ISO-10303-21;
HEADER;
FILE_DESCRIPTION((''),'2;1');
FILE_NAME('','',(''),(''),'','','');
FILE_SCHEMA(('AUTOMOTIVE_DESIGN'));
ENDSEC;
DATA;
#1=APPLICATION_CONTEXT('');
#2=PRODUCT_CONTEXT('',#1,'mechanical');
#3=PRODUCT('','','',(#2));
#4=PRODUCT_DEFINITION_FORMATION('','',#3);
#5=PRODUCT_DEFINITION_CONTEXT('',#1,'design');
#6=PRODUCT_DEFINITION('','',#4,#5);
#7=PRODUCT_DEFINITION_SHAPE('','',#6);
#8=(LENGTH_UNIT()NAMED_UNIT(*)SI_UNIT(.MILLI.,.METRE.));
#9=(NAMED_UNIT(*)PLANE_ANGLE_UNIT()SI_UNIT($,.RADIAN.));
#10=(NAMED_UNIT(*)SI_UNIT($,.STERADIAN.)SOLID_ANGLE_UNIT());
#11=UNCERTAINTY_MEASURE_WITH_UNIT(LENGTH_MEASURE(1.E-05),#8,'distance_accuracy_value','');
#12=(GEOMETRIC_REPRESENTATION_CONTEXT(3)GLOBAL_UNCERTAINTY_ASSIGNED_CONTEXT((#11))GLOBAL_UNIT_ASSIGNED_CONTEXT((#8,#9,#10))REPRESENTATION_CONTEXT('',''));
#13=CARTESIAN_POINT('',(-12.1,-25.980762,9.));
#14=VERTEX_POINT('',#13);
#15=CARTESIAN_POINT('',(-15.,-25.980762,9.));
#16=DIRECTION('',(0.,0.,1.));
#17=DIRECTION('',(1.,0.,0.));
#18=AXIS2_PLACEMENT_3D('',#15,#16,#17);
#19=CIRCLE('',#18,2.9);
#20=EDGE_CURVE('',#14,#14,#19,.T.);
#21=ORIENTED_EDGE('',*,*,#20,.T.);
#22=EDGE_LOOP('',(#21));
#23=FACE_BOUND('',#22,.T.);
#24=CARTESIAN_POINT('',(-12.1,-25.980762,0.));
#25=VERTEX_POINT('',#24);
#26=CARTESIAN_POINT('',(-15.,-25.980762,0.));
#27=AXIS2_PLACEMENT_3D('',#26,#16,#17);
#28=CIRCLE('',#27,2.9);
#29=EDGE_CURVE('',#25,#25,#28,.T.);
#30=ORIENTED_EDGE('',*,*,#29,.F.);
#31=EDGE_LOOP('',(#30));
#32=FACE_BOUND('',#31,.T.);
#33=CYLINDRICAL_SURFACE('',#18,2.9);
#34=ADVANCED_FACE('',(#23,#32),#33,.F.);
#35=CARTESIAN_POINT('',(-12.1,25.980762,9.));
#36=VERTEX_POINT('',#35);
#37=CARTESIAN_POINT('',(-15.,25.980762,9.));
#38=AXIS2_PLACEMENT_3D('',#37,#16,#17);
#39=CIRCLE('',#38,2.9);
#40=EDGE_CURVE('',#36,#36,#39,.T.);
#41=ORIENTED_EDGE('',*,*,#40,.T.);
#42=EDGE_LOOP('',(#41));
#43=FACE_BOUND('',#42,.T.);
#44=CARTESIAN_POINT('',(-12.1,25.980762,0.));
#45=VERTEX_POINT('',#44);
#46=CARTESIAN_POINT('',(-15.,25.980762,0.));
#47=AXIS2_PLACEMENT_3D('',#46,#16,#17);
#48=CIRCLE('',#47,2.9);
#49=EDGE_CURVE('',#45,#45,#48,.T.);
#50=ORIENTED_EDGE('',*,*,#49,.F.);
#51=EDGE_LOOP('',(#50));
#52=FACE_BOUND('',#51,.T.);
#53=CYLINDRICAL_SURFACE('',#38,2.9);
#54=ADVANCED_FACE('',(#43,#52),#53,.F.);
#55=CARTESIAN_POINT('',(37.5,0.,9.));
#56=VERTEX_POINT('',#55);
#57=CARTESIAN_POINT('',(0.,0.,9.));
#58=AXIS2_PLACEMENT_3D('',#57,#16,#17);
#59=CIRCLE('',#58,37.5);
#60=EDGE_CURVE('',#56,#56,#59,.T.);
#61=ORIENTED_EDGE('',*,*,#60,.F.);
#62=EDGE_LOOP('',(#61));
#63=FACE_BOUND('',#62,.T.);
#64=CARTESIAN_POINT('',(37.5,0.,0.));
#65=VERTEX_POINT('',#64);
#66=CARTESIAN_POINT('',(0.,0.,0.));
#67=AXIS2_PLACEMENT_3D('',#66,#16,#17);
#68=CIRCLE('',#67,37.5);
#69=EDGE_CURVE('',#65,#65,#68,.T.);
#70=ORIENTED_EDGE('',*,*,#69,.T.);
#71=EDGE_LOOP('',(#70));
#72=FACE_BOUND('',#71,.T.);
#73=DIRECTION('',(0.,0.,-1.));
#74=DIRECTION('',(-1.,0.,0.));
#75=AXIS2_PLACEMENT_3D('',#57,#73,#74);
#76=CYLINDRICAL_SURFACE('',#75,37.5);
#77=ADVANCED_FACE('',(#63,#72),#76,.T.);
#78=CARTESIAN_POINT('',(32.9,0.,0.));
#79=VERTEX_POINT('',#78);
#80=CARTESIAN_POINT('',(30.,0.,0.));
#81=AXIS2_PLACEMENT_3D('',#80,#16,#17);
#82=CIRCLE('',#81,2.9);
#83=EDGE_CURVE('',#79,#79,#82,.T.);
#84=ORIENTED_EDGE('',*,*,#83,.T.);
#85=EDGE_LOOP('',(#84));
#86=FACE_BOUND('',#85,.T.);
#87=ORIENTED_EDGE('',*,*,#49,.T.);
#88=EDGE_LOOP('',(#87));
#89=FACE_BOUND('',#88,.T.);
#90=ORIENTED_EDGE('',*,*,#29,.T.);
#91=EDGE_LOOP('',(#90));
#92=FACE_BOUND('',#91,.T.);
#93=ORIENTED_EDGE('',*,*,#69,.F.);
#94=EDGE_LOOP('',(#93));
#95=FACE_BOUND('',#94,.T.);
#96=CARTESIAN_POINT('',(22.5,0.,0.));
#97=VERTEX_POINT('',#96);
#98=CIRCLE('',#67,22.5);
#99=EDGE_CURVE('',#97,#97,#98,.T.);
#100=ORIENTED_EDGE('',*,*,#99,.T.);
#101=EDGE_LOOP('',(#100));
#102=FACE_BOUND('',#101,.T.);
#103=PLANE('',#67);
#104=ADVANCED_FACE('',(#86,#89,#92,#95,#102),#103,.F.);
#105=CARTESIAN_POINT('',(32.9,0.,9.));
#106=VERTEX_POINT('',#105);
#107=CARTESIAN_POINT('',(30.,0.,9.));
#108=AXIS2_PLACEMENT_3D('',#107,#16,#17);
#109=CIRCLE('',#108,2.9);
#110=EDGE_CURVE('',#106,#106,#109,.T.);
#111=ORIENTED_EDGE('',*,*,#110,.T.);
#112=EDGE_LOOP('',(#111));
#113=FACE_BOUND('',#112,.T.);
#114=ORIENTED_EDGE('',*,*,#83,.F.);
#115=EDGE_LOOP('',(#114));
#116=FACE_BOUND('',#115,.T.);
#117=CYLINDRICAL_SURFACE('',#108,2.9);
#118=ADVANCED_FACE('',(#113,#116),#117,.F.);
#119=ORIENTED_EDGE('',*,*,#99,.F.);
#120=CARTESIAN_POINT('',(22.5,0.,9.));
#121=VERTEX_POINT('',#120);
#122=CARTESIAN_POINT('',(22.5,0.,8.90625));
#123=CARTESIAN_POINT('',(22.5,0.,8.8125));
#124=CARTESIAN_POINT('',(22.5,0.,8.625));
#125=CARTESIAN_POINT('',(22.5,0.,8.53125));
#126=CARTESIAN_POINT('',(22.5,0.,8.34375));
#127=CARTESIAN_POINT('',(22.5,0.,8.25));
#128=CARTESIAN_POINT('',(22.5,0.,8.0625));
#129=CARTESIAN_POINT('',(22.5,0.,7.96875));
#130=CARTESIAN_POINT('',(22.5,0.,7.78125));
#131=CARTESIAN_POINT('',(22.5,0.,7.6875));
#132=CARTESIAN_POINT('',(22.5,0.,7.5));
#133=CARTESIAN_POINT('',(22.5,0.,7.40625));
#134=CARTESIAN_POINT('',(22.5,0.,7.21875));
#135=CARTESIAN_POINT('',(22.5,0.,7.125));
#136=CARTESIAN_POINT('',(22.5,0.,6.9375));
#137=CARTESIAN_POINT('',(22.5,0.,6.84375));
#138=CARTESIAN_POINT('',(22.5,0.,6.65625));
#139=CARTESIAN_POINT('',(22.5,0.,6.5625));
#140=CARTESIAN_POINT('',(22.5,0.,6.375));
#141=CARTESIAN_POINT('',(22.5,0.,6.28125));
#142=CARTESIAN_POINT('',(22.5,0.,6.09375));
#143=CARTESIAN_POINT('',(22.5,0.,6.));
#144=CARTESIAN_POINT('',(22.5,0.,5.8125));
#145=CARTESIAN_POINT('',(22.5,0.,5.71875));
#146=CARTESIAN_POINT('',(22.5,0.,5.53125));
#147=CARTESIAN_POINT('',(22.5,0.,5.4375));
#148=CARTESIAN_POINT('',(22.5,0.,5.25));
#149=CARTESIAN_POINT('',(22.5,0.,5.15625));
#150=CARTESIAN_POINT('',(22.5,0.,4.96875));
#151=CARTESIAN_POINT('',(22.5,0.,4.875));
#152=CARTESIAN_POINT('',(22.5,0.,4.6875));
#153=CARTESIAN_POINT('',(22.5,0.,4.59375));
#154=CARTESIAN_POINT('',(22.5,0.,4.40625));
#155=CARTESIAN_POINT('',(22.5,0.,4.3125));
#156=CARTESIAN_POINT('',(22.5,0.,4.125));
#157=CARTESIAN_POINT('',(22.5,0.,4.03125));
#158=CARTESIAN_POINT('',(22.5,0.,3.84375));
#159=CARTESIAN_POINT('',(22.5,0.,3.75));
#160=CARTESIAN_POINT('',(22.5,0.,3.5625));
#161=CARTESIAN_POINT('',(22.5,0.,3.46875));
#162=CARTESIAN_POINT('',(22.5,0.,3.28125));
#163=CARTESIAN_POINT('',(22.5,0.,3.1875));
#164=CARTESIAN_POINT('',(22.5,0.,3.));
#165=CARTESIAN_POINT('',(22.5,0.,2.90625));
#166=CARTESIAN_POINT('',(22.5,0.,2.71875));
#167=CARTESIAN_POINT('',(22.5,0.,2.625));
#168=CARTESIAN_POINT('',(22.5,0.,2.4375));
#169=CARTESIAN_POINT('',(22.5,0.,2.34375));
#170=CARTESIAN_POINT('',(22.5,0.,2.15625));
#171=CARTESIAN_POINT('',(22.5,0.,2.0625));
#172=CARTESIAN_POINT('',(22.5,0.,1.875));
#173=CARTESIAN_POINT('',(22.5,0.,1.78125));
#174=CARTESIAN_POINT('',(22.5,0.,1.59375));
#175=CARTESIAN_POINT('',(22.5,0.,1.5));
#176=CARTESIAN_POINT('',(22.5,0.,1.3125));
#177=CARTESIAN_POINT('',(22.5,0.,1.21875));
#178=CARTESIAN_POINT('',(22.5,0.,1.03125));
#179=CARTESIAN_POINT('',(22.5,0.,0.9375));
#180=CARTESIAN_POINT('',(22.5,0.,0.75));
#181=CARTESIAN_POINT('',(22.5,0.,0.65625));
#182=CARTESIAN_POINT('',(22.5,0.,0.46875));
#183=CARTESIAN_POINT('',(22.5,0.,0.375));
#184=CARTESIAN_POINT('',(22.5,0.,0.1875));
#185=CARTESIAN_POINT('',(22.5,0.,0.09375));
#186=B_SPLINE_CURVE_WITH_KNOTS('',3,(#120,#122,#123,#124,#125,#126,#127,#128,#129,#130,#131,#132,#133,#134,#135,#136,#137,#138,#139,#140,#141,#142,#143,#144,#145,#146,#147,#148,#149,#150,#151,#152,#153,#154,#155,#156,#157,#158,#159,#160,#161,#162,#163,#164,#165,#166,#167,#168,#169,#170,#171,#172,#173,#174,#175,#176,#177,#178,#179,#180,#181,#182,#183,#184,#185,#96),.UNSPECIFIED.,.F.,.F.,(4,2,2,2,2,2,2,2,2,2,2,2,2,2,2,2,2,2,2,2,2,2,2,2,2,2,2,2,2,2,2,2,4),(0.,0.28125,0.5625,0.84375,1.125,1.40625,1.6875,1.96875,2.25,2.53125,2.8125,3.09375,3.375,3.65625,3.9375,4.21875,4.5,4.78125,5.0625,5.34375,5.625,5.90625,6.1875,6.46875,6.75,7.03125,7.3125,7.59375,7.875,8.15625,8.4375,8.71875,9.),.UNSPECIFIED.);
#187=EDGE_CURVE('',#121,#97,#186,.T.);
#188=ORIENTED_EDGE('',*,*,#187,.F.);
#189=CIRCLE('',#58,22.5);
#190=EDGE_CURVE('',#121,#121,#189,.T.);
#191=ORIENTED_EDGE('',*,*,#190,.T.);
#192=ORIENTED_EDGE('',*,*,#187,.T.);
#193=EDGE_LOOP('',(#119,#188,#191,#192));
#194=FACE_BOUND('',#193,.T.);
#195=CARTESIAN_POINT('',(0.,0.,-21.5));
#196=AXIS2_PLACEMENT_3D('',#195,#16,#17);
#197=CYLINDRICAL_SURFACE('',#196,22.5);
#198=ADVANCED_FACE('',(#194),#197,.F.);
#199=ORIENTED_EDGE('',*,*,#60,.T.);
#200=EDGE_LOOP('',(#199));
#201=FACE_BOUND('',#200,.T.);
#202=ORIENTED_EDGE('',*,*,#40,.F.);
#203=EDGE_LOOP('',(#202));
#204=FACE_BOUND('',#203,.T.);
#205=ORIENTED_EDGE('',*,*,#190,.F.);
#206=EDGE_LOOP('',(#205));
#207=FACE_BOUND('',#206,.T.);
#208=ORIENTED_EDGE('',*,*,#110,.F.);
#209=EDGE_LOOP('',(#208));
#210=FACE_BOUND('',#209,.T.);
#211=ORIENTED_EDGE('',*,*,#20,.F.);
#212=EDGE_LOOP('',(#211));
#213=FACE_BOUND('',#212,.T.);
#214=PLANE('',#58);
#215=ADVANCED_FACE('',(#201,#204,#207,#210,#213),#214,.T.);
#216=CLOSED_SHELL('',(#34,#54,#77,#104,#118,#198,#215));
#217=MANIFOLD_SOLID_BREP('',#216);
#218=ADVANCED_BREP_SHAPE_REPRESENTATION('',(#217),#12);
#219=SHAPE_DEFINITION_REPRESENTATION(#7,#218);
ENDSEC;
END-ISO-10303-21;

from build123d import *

# Parameters (mm, degrees)
ESQUISSE1_R              = 37.5
BOSS_EXTRU_1_DEPTH       = 9
ESQUISSE2_R              = 22.5
ENL_V_MAT_EXTRU_1_DEPTH  = 30.5
D_GAGEMENT_M51_OUTLINE_R = 2.9
D_GAGEMENT_M51_DEPTH     = 9


# Read off the part's stored shape, not the designer's step: Dégagement M51
with BuildPart() as part:
    # Esquisse1 → Boss.-Extru.1 (new body)
    with BuildSketch(Plane.XY):
        Circle(ESQUISSE1_R)
    extrude(amount=BOSS_EXTRU_1_DEPTH)

    # Esquisse2 → Enlèv. mat.-Extru.1 (cut)
    with BuildSketch(Plane.XY.offset(9)):
        Circle(ESQUISSE2_R)
    extrude(amount=-ENL_V_MAT_EXTRU_1_DEPTH, mode=Mode.SUBTRACT)

    # Dégagement M51 outline → Dégagement M51 (cut)
    with BuildSketch(Plane.XY):
        with Locations((-15, -25.980762114)):
            Circle(D_GAGEMENT_M51_OUTLINE_R)
        with Locations((-15, 25.980762114)):
            Circle(D_GAGEMENT_M51_OUTLINE_R)
        with Locations((30, 0)):
            Circle(D_GAGEMENT_M51_OUTLINE_R)
    extrude(amount=D_GAGEMENT_M51_DEPTH, mode=Mode.SUBTRACT)


solid = part.part
